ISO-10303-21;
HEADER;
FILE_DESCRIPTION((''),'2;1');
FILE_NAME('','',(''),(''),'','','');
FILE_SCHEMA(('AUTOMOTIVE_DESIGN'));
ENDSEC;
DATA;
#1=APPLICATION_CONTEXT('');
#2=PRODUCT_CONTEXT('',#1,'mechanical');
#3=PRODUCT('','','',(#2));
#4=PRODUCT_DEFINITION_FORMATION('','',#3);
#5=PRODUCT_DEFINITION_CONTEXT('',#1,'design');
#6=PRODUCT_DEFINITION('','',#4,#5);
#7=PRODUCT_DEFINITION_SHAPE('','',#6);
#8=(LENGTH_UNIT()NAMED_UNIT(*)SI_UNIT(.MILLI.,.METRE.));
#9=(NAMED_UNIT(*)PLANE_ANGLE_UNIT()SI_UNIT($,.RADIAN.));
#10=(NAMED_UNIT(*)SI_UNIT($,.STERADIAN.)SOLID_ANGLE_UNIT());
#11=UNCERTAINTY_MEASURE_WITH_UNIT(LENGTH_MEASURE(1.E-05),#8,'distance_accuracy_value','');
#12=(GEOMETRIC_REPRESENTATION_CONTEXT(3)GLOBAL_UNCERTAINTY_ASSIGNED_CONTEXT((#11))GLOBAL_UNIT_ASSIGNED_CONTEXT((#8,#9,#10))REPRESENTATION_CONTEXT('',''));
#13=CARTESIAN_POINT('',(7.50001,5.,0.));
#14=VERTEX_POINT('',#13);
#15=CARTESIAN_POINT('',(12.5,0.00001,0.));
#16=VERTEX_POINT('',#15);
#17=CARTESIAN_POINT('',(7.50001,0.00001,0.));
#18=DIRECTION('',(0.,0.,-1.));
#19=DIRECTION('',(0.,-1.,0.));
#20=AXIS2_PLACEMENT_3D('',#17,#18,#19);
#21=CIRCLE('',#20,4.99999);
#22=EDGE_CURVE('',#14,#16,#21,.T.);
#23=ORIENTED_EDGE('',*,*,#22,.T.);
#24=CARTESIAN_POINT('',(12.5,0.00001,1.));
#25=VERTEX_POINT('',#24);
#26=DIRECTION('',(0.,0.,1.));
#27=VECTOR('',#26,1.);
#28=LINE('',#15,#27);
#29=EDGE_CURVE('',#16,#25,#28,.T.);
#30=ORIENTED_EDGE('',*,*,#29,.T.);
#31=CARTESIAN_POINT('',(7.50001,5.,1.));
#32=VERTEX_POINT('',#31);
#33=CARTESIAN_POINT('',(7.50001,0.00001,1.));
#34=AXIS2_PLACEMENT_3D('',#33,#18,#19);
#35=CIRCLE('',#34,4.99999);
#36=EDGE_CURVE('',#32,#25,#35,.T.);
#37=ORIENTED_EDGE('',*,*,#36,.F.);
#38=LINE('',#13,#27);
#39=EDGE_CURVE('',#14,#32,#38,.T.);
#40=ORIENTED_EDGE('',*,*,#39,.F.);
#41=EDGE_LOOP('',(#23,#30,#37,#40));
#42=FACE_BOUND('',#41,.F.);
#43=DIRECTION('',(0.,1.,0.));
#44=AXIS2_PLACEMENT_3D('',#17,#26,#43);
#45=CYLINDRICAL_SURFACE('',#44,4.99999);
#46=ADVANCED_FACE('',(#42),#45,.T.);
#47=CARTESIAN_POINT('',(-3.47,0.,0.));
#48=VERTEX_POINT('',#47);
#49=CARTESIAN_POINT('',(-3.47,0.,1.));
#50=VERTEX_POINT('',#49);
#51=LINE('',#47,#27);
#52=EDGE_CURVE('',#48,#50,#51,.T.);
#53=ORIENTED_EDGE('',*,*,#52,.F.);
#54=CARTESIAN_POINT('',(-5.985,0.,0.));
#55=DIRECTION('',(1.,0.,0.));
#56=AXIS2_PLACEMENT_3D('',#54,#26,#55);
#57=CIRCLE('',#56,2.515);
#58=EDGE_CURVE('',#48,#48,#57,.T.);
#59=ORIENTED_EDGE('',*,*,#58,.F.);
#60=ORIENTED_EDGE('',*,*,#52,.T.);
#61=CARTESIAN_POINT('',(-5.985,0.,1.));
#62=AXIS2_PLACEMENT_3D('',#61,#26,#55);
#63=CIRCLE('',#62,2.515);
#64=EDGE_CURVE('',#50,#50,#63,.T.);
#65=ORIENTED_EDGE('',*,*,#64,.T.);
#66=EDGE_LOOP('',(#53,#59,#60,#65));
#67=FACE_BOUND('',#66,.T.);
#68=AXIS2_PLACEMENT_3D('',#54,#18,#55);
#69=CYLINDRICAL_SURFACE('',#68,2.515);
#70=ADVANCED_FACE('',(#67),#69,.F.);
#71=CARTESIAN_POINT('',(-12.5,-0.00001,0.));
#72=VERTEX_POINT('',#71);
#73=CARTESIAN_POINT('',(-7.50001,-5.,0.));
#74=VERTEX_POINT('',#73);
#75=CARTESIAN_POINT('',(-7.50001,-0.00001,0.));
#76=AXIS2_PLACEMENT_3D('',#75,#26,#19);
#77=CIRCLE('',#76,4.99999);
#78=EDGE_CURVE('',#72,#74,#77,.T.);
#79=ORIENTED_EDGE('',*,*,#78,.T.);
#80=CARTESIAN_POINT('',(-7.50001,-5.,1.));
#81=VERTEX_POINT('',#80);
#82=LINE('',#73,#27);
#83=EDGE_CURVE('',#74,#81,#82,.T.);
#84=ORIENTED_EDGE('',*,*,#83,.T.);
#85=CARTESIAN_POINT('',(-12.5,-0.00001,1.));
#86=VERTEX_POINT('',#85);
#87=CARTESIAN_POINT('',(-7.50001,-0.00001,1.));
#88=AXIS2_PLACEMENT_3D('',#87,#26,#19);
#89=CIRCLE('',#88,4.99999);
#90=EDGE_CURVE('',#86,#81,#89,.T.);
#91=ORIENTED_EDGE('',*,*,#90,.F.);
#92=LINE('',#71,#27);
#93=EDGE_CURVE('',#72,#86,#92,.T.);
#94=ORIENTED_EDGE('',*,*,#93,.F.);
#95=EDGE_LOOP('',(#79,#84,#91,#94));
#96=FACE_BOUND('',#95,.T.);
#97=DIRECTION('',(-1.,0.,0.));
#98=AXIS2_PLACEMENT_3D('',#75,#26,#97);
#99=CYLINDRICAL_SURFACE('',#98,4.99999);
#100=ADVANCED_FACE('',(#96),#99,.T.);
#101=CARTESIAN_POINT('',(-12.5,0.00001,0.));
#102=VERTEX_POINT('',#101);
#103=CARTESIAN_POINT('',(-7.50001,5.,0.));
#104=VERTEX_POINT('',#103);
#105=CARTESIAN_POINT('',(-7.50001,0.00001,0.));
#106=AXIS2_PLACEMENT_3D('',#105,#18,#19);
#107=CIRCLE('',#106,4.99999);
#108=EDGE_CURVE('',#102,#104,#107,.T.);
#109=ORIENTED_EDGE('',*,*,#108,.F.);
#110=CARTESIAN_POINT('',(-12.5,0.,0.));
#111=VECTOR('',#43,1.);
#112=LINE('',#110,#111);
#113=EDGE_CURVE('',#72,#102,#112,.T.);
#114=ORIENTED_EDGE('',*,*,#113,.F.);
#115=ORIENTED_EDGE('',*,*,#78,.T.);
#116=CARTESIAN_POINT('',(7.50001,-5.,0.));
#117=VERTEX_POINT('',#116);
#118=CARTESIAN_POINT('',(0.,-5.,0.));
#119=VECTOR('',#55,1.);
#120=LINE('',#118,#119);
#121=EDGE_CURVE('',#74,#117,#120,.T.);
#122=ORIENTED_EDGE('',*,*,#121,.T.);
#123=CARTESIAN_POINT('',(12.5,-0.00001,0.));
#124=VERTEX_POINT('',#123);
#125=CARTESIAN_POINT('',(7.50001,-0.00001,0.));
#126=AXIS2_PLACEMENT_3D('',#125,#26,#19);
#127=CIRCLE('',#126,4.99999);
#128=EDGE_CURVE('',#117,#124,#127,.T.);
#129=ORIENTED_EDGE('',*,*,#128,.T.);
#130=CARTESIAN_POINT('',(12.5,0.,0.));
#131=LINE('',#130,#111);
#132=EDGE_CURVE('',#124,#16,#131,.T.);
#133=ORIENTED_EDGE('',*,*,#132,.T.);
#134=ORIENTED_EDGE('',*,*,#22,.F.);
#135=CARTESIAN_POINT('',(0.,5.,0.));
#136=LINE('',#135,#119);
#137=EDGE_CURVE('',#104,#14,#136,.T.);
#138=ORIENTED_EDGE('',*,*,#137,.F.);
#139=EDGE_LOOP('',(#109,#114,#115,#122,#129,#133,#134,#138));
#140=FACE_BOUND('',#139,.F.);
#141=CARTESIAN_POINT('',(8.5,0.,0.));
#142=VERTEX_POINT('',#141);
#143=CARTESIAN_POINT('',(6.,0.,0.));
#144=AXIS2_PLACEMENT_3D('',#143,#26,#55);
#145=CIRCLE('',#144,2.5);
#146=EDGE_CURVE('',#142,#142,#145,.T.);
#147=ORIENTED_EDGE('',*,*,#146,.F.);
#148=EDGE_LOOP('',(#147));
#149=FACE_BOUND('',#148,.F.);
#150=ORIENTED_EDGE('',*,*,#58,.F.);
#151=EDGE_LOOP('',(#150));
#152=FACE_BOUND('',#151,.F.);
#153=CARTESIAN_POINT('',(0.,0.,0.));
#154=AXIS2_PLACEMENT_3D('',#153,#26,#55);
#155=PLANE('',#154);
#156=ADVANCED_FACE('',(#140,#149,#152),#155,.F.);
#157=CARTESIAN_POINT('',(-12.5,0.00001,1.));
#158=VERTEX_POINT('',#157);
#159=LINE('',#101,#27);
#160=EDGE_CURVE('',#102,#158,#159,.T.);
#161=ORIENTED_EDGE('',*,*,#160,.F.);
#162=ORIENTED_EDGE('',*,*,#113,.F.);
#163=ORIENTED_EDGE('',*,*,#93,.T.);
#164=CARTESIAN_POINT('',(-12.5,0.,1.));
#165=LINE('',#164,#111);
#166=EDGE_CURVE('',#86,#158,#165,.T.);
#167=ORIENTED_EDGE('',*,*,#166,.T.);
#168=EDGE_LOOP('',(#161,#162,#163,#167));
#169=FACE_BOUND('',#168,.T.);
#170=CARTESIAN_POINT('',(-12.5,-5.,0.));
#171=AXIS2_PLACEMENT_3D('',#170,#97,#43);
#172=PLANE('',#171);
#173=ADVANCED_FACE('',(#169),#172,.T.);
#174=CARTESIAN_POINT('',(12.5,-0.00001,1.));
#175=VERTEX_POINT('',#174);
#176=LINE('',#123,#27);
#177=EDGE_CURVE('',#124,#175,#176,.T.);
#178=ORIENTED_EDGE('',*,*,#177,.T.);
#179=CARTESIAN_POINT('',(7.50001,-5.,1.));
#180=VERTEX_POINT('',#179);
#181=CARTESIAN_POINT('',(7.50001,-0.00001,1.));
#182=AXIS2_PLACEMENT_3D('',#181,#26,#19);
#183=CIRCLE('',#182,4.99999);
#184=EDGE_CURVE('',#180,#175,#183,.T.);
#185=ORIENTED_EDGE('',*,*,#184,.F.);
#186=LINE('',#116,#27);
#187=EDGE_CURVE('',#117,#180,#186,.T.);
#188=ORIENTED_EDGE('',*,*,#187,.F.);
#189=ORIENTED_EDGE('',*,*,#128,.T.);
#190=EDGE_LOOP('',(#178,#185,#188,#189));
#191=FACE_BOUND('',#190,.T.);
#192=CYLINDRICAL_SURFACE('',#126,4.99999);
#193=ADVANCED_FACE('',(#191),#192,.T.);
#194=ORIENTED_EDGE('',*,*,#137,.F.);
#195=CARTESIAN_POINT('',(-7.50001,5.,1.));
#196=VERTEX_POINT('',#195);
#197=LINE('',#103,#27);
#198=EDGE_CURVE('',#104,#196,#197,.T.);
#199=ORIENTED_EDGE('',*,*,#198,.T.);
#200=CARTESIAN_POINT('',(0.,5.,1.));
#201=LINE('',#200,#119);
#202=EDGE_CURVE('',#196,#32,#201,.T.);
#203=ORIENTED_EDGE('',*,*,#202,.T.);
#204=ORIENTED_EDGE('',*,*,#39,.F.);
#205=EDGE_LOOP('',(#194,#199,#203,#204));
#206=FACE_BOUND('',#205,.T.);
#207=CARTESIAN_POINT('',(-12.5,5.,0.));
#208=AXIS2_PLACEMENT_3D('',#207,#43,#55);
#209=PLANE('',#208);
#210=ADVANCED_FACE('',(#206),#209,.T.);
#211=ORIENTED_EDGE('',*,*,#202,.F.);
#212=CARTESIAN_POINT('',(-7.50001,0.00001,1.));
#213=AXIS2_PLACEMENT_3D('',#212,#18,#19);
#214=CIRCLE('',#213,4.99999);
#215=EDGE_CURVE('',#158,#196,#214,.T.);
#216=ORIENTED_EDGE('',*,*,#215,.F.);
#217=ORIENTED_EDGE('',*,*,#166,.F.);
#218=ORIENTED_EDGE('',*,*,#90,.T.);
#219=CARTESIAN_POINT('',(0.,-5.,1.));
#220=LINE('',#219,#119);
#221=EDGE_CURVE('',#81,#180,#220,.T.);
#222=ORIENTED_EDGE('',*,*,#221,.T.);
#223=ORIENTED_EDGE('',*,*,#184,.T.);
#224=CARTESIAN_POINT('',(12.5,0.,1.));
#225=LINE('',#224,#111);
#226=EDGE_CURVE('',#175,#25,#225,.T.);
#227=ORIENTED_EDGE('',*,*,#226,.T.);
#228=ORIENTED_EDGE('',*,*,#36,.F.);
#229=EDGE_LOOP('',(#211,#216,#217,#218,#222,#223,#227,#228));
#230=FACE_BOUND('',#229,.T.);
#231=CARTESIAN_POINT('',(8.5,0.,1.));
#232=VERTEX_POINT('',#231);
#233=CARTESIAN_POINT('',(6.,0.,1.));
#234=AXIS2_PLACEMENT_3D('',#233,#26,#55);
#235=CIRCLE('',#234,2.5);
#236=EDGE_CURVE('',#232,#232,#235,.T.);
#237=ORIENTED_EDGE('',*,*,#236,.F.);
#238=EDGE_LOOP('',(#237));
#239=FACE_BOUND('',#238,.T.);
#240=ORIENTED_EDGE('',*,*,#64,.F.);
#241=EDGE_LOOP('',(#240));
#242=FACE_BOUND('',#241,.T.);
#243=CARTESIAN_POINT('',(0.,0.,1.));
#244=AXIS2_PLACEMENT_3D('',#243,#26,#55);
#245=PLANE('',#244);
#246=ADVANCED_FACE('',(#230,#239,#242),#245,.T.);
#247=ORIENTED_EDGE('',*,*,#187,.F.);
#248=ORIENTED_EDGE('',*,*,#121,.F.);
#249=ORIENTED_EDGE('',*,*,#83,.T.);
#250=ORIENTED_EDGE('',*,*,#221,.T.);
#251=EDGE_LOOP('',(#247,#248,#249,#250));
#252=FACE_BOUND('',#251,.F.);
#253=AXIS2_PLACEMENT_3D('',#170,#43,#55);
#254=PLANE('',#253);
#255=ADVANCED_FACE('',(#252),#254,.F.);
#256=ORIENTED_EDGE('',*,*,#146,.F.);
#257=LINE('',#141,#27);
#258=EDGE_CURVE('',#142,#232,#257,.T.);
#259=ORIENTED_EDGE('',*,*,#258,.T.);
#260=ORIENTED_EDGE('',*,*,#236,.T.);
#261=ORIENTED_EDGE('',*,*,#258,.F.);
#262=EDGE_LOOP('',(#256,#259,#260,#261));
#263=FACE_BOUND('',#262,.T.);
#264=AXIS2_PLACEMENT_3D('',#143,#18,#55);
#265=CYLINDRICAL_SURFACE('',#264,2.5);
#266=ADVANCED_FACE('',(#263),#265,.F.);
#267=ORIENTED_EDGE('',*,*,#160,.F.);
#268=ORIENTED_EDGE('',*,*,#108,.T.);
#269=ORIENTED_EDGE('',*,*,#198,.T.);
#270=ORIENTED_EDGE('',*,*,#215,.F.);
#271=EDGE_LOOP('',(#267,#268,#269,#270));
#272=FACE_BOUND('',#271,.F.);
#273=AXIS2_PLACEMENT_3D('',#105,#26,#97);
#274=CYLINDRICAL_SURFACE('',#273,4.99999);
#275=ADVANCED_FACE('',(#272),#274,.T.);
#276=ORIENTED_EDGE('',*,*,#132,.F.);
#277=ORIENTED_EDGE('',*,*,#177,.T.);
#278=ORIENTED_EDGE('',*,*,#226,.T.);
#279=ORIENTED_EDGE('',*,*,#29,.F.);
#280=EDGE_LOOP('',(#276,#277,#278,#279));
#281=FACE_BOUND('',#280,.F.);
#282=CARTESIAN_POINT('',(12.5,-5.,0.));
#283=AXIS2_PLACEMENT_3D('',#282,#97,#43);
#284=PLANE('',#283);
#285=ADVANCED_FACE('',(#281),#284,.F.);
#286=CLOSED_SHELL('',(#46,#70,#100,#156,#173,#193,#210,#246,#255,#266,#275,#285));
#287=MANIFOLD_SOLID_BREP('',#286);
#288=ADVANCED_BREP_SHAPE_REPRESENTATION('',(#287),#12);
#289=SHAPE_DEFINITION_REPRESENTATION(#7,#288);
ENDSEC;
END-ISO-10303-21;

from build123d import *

# Parameters (mm, degrees)
F0_W     = 25
F0_H     = 10
F0_R     = 2.515
F0_R_2   = 2.5
F1_DEPTH = 1
F2_R     = 4.99999


# Not quite as in the source:
# - a fillet or chamfer is up to 0.001 mm smaller than in the source, because OpenCascade refuses the exact size


with BuildPart() as f1:
    # F0 (on Top) → F1 (new body)
    with BuildSketch(Plane.XY):
        Rectangle(F0_W, F0_H)
        with Locations((-5.985, 0)):
            Circle(F0_R, mode=Mode.SUBTRACT)
        with Locations((6, 0)):
            Circle(F0_R_2, mode=Mode.SUBTRACT)
    extrude(amount=F1_DEPTH)

    # F2 (radius 5 in the source; OpenCascade refuses exactly that, so slightly less here)
    f2_edges = [f1.edges().sort_by_distance(p)[0] for p in [
        (-12.5, 5, 0.5),
        (12.5, 5, 0.5),
        (12.5, -5, 0.5),
        (-12.5, -5, 0.5),
    ]]
    fillet(f2_edges, radius=F2_R)


solid = f1.part
